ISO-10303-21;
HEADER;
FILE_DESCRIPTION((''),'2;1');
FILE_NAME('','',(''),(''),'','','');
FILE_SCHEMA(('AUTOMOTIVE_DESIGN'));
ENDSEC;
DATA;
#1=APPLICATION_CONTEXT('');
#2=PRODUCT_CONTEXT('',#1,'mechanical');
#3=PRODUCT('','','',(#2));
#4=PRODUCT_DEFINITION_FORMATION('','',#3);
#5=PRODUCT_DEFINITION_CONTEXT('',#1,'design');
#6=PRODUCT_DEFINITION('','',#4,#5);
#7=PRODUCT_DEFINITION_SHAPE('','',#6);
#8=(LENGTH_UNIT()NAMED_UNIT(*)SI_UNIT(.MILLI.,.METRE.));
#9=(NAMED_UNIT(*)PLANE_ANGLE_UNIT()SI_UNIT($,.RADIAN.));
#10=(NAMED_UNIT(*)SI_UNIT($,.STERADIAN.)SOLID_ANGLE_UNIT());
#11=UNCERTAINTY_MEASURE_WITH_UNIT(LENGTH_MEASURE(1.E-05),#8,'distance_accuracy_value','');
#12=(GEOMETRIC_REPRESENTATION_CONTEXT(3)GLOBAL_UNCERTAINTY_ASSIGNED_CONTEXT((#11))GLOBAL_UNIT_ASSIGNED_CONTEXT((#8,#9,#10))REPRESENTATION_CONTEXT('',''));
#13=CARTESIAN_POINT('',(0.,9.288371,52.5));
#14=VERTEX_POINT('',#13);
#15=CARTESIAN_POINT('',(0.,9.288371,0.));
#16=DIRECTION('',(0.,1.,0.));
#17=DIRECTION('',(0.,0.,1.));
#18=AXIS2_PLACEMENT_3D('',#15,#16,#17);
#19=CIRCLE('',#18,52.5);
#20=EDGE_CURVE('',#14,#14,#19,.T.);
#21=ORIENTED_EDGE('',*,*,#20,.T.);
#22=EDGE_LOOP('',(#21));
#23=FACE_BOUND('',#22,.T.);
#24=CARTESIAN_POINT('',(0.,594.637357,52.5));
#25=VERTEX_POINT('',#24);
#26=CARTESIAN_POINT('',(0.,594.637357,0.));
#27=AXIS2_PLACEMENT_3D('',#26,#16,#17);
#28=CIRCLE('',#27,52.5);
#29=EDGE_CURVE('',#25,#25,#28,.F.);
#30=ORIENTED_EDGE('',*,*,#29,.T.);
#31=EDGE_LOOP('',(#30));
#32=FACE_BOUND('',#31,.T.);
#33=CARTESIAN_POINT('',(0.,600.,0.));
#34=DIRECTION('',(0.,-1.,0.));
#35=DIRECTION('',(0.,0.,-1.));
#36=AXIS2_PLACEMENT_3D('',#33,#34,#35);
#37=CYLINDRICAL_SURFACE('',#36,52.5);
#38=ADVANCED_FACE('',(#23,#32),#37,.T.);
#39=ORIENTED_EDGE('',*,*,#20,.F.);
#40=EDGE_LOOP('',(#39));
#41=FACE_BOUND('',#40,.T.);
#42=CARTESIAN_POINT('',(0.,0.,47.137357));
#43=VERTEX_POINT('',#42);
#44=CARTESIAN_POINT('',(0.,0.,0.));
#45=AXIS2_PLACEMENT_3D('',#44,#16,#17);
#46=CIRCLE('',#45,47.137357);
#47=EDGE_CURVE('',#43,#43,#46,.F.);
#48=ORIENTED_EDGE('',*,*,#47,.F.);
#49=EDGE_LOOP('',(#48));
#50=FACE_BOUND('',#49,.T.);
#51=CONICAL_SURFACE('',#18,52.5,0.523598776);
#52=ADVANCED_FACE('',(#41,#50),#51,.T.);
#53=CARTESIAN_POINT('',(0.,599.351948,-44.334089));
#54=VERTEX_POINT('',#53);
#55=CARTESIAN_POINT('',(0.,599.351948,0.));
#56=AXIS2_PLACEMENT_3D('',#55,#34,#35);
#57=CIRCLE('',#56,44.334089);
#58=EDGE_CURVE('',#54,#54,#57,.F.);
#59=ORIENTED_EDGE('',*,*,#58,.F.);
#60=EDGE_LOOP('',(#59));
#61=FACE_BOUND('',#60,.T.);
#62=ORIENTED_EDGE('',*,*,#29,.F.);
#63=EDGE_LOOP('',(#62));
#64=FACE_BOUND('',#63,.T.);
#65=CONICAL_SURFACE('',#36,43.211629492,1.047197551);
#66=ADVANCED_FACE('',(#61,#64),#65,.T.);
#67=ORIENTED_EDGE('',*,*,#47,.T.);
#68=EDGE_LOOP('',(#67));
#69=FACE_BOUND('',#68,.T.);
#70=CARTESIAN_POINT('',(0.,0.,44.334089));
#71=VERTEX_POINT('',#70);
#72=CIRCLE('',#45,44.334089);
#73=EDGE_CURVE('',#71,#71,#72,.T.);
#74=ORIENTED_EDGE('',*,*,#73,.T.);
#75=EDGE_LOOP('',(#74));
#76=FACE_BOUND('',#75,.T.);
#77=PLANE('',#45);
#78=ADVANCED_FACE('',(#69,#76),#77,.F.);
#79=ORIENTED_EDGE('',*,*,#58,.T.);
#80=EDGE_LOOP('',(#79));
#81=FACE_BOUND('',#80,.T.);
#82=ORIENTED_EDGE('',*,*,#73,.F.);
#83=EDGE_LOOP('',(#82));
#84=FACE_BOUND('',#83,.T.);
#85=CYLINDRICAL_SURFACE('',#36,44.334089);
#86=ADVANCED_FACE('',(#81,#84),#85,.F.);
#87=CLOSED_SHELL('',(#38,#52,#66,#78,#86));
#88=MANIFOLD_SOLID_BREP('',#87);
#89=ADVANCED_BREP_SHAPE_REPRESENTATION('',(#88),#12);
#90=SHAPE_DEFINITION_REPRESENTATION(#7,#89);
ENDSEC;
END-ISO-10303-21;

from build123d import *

# Parameters (mm, degrees)
SKETCH1_R           = 52.5
BOSS_EXTRUDE1_DEPTH = 600
SKETCH2_R           = 44.334088823
CUT_EXTRUDE1_DEPTH  = 605.576297914
CHAMFER1_SIZE       = 5.362643
CHAMFER1_SIZE_2     = 9.288371


with BuildPart() as part:
    # Sketch1 → Boss-Extrude1 (new body)
    with BuildSketch(Plane(origin=(0, 0, 0), x_dir=(1, 0, 0), z_dir=(0, 1, 0))):
        with Locations(Location((0, 0, 0), (0, 0, 270))):
            Circle(SKETCH1_R)
    extrude(amount=BOSS_EXTRUDE1_DEPTH)

    # Sketch2 → Cut-Extrude1 (cut, through all)
    with BuildSketch(Plane(origin=(0, 0, 0), x_dir=(1, 0, 0), z_dir=(0, 1, 0))):
        with Locations(Location((0, 0, 0), (0, 0, 270))):
            Circle(SKETCH2_R)
    extrude(amount=CUT_EXTRUDE1_DEPTH, mode=Mode.SUBTRACT)

    # Chamfer1
    # the kernel refuses this chamfer: 9.288371, 5.362643 mm, written as the material it takes off along each edge
    with BuildSketch(Plane(origin=(0, 600, 0), x_dir=(0, 0, 1), z_dir=(-1, 0, 0))) as chamfer1_piece_1:
        Polygon((52.5, -CHAMFER1_SIZE), (52.5 - CHAMFER1_SIZE_2, 0), (52.5, 0), align=None)
    revolve(axis=Axis((0, 600, 0), (0, 1, 0)), mode=Mode.SUBTRACT)
    with BuildSketch(Plane(origin=(0, 0, 0), x_dir=(0, 0, 1), z_dir=(-1, 0, 0))) as chamfer1_piece_2:
        Polygon((52.5, CHAMFER1_SIZE_2), (52.5 - CHAMFER1_SIZE, 0), (52.5, 0), align=None)
    revolve(axis=Axis((0, 0, 0), (0, 1, 0)), mode=Mode.SUBTRACT)


solid = part.part
